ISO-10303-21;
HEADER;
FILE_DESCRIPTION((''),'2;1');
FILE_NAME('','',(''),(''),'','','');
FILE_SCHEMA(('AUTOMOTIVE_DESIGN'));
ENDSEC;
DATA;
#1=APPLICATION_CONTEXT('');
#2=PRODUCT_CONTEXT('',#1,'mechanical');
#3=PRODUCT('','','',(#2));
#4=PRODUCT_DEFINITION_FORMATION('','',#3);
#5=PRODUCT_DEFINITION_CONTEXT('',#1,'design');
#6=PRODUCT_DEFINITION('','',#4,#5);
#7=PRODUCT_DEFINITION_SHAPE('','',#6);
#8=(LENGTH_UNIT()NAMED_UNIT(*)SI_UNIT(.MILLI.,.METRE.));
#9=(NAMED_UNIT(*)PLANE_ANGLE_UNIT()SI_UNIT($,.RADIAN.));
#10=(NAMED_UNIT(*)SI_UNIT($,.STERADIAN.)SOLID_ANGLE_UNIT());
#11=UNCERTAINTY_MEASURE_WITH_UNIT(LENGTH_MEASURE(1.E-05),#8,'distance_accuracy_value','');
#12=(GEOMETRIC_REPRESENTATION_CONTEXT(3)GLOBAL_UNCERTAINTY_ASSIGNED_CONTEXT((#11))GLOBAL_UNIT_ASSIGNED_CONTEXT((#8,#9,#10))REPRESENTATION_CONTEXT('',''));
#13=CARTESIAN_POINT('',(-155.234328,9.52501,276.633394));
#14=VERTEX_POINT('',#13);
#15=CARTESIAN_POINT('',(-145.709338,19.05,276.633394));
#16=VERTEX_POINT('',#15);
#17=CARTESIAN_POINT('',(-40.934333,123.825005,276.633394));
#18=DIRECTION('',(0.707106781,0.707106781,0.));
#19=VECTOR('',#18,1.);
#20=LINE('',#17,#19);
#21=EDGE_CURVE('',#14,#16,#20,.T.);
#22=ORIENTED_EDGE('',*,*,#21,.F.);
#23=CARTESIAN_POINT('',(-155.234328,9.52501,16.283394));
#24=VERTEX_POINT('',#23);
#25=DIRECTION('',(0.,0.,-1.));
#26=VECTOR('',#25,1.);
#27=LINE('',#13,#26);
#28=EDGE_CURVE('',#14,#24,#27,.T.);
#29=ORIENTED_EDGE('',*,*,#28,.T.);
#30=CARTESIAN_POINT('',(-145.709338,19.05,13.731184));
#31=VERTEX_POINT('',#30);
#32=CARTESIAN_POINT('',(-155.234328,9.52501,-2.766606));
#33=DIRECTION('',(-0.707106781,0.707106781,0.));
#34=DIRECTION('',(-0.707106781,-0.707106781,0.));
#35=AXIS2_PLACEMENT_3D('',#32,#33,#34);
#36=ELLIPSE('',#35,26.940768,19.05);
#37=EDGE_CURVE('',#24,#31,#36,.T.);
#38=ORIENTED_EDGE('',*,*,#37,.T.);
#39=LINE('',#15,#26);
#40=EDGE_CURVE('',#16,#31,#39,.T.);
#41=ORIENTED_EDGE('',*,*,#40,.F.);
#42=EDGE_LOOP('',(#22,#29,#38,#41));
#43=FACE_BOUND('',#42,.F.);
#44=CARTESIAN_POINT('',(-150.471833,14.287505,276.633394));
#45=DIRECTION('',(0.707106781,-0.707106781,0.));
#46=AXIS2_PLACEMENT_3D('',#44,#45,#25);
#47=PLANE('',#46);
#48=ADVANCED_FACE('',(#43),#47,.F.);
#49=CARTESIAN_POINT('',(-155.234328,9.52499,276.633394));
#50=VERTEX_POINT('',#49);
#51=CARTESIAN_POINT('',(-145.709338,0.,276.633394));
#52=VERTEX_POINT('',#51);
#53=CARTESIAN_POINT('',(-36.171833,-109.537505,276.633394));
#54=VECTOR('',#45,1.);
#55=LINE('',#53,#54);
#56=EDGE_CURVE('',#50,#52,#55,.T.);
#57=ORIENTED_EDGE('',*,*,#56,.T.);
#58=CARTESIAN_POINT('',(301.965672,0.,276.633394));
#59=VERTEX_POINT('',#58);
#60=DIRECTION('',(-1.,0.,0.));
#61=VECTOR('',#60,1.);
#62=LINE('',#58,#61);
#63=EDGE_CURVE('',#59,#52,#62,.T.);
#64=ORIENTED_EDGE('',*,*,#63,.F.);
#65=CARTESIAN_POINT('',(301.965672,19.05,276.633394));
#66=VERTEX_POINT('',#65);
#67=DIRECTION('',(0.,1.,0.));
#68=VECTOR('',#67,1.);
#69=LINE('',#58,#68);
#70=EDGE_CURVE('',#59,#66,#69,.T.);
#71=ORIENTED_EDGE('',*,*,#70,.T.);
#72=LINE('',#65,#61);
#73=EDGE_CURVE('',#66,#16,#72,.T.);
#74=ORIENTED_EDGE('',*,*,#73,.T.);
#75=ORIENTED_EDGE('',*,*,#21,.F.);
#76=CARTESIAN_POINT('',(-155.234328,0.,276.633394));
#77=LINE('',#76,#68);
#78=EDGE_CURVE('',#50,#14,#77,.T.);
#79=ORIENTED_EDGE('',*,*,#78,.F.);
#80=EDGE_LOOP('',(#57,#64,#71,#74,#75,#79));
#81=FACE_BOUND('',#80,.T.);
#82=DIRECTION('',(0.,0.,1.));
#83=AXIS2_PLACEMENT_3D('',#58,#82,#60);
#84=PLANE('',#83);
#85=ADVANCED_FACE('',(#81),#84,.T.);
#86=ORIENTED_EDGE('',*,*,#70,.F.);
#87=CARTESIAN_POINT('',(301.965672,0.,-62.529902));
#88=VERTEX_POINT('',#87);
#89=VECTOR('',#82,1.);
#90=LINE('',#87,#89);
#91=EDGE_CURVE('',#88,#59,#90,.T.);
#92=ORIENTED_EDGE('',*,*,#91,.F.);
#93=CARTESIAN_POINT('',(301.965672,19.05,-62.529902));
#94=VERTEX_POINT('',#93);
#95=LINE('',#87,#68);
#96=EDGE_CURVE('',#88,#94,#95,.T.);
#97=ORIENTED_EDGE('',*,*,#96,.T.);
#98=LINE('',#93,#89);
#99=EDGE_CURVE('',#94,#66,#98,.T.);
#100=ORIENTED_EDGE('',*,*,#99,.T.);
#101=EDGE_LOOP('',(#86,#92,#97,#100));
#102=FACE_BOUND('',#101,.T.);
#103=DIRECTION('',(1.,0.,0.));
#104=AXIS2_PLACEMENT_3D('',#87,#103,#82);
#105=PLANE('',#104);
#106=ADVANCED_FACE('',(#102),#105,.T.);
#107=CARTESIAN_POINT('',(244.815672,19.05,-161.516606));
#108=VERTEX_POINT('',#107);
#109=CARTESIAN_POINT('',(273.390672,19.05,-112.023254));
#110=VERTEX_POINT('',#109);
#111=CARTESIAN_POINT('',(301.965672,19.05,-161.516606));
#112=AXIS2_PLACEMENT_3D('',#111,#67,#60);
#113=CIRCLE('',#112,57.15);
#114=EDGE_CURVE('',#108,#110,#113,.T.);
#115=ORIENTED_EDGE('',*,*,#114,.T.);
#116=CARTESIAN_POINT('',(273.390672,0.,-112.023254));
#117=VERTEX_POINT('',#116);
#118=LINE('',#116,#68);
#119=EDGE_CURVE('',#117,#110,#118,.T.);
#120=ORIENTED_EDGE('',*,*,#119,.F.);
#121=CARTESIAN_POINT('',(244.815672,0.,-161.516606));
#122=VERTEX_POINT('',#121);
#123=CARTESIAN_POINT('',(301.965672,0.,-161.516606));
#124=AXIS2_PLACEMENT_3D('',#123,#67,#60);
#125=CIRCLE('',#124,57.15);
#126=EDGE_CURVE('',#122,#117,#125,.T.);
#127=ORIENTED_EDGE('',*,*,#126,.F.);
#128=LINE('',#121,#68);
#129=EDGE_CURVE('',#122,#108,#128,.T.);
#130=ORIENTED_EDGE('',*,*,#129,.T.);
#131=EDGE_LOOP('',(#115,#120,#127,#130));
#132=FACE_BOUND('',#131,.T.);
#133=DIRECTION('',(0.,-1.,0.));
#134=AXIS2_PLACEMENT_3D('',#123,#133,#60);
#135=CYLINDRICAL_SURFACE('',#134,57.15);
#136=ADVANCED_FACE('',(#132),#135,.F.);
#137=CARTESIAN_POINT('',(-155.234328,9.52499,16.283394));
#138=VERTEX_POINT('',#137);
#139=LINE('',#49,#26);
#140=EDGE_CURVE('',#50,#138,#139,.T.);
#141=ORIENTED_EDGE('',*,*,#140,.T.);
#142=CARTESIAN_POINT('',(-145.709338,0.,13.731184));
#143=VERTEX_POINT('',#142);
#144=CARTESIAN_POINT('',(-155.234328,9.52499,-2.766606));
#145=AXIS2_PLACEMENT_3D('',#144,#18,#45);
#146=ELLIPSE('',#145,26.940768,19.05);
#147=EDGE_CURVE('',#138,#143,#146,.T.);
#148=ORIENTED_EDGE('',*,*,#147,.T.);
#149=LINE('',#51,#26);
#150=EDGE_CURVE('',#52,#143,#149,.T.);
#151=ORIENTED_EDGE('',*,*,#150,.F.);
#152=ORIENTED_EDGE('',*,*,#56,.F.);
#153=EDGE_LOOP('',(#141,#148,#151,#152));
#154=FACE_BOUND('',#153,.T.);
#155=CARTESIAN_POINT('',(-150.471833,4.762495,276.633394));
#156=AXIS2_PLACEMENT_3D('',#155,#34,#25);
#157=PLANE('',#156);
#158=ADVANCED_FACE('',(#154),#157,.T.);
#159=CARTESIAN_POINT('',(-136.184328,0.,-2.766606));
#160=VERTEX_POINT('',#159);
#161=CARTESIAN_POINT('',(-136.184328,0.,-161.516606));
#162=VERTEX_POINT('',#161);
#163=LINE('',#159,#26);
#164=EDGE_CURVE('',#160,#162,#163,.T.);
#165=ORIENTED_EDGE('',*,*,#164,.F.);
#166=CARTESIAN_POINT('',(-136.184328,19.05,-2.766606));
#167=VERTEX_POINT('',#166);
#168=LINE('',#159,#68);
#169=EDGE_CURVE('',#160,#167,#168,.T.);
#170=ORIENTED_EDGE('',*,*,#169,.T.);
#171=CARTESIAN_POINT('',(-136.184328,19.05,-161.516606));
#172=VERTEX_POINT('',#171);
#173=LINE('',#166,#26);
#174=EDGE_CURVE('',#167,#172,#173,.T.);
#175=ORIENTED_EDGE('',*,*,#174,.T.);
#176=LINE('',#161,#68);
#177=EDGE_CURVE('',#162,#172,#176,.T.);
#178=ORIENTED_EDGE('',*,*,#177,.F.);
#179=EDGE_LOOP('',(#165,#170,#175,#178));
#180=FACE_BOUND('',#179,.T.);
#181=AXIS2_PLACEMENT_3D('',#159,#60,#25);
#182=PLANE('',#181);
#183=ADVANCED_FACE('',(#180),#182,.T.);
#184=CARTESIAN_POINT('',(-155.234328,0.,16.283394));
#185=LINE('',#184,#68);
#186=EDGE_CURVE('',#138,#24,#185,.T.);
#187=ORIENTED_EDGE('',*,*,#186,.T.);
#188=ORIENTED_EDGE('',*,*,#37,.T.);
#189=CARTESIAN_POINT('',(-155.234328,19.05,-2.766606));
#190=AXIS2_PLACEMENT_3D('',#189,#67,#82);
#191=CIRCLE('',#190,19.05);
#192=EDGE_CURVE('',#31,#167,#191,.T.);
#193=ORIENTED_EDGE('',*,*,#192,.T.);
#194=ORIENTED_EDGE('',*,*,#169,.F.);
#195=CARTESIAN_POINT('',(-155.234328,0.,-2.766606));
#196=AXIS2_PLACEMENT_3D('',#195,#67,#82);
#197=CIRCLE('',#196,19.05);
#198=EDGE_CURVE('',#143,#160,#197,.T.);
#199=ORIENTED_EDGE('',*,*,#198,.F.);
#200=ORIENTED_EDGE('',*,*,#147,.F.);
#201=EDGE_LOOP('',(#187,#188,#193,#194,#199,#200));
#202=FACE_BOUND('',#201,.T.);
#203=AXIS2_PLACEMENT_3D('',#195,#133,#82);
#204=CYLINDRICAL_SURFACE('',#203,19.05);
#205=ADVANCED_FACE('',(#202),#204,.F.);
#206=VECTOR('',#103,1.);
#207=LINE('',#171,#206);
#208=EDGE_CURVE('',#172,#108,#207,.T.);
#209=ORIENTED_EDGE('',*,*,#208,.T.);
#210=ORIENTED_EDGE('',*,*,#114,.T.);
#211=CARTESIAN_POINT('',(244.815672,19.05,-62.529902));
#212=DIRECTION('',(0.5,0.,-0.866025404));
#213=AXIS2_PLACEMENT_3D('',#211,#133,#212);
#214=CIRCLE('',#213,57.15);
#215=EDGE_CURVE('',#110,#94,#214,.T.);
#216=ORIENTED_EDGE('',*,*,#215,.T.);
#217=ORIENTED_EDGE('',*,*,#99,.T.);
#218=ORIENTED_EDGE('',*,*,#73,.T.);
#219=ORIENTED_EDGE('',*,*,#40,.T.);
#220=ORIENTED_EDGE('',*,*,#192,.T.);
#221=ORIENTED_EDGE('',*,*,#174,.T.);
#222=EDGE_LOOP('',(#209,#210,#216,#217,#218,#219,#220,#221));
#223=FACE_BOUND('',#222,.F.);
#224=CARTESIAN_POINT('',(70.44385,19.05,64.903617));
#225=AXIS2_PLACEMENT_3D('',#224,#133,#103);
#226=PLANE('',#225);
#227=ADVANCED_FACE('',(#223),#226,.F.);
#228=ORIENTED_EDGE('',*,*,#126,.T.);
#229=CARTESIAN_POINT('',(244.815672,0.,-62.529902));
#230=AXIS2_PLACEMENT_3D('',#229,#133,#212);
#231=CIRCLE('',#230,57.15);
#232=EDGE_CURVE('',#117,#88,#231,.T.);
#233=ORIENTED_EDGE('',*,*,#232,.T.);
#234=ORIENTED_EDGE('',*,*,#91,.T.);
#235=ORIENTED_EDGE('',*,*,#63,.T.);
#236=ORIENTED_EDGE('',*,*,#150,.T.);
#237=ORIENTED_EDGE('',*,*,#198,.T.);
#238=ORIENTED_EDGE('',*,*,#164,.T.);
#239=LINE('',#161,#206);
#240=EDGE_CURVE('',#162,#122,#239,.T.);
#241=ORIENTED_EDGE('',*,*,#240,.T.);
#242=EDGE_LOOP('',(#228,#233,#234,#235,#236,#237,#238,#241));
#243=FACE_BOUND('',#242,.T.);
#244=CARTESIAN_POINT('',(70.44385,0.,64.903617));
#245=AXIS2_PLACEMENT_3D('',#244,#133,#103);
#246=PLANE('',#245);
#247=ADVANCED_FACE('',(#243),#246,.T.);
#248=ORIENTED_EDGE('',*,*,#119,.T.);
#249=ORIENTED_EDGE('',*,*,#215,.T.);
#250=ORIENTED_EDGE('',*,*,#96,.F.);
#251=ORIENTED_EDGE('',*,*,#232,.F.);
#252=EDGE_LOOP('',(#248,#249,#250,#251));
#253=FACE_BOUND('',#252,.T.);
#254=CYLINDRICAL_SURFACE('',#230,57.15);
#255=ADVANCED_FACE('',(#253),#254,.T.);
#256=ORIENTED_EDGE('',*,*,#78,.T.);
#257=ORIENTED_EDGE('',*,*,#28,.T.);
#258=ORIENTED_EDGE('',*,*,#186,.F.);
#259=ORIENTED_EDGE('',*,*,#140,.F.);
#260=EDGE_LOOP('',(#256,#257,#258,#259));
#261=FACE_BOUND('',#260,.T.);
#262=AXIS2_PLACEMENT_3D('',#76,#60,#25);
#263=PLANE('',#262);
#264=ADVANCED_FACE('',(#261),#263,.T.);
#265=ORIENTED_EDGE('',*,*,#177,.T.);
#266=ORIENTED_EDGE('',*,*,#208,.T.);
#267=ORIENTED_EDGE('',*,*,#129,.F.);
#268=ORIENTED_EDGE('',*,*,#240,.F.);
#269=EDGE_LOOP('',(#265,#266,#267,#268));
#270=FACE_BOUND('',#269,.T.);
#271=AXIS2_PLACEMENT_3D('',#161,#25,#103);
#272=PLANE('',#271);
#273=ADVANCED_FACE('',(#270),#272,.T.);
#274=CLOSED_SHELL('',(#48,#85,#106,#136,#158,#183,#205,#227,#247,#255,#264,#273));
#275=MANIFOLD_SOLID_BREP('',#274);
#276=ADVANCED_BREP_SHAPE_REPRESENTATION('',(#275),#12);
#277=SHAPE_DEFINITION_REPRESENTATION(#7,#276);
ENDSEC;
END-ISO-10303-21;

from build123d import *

# Parameters (mm, degrees)
F1_DEPTH = 19.05
F2_SIZE  = 9.52499


# Not quite as in the source:
# - a fillet or chamfer is up to 0.001 mm smaller than in the source, because OpenCascade refuses the exact size


with BuildPart() as f1:
    # F0 (on Front) → F1 (new body)
    with BuildSketch(Plane.XZ):
        with BuildLine():
            Line((301.9656721215, 276.6333943507), (-155.2343278785, 276.6333943507))
            Line((-155.2343278785, 276.6333943507), (-155.2343278785, 16.2833943507))
            ThreePointArc((-155.2343278785, 16.2833943507), (-141.7639436969, 10.7037785323), (-136.1843278785, -2.7666056493))
            Line((-136.1843278785, -2.7666056493), (-136.1843278785, -161.5166056493))
            Line((-136.1843278785, -161.5166056493), (244.8156721215, -161.5166056493))
            ThreePointArc((244.8156721215, -161.5166056493), (252.4723202952, -132.9416056493), (273.3906721215, -112.023253823))
            ThreePointArc((273.3906721215, -112.023253823), (294.3090239478, -91.1049019968), (301.9656721215, -62.5299019968))
            Line((301.9656721215, -62.5299019968), (301.9656721215, 276.6333943507))
        make_face()
    extrude(amount=-F1_DEPTH)

    # F2 (size 9.525 in the source; OpenCascade refuses exactly that, so slightly less here)
    f2_edges = [f1.edges().sort_by_distance(p)[0] for p in [
        (-155.234328, 0, 146.458394),
        (-155.234328, 19.05, 146.458394),
    ]]
    chamfer(f2_edges, length=F2_SIZE)


solid = f1.part
